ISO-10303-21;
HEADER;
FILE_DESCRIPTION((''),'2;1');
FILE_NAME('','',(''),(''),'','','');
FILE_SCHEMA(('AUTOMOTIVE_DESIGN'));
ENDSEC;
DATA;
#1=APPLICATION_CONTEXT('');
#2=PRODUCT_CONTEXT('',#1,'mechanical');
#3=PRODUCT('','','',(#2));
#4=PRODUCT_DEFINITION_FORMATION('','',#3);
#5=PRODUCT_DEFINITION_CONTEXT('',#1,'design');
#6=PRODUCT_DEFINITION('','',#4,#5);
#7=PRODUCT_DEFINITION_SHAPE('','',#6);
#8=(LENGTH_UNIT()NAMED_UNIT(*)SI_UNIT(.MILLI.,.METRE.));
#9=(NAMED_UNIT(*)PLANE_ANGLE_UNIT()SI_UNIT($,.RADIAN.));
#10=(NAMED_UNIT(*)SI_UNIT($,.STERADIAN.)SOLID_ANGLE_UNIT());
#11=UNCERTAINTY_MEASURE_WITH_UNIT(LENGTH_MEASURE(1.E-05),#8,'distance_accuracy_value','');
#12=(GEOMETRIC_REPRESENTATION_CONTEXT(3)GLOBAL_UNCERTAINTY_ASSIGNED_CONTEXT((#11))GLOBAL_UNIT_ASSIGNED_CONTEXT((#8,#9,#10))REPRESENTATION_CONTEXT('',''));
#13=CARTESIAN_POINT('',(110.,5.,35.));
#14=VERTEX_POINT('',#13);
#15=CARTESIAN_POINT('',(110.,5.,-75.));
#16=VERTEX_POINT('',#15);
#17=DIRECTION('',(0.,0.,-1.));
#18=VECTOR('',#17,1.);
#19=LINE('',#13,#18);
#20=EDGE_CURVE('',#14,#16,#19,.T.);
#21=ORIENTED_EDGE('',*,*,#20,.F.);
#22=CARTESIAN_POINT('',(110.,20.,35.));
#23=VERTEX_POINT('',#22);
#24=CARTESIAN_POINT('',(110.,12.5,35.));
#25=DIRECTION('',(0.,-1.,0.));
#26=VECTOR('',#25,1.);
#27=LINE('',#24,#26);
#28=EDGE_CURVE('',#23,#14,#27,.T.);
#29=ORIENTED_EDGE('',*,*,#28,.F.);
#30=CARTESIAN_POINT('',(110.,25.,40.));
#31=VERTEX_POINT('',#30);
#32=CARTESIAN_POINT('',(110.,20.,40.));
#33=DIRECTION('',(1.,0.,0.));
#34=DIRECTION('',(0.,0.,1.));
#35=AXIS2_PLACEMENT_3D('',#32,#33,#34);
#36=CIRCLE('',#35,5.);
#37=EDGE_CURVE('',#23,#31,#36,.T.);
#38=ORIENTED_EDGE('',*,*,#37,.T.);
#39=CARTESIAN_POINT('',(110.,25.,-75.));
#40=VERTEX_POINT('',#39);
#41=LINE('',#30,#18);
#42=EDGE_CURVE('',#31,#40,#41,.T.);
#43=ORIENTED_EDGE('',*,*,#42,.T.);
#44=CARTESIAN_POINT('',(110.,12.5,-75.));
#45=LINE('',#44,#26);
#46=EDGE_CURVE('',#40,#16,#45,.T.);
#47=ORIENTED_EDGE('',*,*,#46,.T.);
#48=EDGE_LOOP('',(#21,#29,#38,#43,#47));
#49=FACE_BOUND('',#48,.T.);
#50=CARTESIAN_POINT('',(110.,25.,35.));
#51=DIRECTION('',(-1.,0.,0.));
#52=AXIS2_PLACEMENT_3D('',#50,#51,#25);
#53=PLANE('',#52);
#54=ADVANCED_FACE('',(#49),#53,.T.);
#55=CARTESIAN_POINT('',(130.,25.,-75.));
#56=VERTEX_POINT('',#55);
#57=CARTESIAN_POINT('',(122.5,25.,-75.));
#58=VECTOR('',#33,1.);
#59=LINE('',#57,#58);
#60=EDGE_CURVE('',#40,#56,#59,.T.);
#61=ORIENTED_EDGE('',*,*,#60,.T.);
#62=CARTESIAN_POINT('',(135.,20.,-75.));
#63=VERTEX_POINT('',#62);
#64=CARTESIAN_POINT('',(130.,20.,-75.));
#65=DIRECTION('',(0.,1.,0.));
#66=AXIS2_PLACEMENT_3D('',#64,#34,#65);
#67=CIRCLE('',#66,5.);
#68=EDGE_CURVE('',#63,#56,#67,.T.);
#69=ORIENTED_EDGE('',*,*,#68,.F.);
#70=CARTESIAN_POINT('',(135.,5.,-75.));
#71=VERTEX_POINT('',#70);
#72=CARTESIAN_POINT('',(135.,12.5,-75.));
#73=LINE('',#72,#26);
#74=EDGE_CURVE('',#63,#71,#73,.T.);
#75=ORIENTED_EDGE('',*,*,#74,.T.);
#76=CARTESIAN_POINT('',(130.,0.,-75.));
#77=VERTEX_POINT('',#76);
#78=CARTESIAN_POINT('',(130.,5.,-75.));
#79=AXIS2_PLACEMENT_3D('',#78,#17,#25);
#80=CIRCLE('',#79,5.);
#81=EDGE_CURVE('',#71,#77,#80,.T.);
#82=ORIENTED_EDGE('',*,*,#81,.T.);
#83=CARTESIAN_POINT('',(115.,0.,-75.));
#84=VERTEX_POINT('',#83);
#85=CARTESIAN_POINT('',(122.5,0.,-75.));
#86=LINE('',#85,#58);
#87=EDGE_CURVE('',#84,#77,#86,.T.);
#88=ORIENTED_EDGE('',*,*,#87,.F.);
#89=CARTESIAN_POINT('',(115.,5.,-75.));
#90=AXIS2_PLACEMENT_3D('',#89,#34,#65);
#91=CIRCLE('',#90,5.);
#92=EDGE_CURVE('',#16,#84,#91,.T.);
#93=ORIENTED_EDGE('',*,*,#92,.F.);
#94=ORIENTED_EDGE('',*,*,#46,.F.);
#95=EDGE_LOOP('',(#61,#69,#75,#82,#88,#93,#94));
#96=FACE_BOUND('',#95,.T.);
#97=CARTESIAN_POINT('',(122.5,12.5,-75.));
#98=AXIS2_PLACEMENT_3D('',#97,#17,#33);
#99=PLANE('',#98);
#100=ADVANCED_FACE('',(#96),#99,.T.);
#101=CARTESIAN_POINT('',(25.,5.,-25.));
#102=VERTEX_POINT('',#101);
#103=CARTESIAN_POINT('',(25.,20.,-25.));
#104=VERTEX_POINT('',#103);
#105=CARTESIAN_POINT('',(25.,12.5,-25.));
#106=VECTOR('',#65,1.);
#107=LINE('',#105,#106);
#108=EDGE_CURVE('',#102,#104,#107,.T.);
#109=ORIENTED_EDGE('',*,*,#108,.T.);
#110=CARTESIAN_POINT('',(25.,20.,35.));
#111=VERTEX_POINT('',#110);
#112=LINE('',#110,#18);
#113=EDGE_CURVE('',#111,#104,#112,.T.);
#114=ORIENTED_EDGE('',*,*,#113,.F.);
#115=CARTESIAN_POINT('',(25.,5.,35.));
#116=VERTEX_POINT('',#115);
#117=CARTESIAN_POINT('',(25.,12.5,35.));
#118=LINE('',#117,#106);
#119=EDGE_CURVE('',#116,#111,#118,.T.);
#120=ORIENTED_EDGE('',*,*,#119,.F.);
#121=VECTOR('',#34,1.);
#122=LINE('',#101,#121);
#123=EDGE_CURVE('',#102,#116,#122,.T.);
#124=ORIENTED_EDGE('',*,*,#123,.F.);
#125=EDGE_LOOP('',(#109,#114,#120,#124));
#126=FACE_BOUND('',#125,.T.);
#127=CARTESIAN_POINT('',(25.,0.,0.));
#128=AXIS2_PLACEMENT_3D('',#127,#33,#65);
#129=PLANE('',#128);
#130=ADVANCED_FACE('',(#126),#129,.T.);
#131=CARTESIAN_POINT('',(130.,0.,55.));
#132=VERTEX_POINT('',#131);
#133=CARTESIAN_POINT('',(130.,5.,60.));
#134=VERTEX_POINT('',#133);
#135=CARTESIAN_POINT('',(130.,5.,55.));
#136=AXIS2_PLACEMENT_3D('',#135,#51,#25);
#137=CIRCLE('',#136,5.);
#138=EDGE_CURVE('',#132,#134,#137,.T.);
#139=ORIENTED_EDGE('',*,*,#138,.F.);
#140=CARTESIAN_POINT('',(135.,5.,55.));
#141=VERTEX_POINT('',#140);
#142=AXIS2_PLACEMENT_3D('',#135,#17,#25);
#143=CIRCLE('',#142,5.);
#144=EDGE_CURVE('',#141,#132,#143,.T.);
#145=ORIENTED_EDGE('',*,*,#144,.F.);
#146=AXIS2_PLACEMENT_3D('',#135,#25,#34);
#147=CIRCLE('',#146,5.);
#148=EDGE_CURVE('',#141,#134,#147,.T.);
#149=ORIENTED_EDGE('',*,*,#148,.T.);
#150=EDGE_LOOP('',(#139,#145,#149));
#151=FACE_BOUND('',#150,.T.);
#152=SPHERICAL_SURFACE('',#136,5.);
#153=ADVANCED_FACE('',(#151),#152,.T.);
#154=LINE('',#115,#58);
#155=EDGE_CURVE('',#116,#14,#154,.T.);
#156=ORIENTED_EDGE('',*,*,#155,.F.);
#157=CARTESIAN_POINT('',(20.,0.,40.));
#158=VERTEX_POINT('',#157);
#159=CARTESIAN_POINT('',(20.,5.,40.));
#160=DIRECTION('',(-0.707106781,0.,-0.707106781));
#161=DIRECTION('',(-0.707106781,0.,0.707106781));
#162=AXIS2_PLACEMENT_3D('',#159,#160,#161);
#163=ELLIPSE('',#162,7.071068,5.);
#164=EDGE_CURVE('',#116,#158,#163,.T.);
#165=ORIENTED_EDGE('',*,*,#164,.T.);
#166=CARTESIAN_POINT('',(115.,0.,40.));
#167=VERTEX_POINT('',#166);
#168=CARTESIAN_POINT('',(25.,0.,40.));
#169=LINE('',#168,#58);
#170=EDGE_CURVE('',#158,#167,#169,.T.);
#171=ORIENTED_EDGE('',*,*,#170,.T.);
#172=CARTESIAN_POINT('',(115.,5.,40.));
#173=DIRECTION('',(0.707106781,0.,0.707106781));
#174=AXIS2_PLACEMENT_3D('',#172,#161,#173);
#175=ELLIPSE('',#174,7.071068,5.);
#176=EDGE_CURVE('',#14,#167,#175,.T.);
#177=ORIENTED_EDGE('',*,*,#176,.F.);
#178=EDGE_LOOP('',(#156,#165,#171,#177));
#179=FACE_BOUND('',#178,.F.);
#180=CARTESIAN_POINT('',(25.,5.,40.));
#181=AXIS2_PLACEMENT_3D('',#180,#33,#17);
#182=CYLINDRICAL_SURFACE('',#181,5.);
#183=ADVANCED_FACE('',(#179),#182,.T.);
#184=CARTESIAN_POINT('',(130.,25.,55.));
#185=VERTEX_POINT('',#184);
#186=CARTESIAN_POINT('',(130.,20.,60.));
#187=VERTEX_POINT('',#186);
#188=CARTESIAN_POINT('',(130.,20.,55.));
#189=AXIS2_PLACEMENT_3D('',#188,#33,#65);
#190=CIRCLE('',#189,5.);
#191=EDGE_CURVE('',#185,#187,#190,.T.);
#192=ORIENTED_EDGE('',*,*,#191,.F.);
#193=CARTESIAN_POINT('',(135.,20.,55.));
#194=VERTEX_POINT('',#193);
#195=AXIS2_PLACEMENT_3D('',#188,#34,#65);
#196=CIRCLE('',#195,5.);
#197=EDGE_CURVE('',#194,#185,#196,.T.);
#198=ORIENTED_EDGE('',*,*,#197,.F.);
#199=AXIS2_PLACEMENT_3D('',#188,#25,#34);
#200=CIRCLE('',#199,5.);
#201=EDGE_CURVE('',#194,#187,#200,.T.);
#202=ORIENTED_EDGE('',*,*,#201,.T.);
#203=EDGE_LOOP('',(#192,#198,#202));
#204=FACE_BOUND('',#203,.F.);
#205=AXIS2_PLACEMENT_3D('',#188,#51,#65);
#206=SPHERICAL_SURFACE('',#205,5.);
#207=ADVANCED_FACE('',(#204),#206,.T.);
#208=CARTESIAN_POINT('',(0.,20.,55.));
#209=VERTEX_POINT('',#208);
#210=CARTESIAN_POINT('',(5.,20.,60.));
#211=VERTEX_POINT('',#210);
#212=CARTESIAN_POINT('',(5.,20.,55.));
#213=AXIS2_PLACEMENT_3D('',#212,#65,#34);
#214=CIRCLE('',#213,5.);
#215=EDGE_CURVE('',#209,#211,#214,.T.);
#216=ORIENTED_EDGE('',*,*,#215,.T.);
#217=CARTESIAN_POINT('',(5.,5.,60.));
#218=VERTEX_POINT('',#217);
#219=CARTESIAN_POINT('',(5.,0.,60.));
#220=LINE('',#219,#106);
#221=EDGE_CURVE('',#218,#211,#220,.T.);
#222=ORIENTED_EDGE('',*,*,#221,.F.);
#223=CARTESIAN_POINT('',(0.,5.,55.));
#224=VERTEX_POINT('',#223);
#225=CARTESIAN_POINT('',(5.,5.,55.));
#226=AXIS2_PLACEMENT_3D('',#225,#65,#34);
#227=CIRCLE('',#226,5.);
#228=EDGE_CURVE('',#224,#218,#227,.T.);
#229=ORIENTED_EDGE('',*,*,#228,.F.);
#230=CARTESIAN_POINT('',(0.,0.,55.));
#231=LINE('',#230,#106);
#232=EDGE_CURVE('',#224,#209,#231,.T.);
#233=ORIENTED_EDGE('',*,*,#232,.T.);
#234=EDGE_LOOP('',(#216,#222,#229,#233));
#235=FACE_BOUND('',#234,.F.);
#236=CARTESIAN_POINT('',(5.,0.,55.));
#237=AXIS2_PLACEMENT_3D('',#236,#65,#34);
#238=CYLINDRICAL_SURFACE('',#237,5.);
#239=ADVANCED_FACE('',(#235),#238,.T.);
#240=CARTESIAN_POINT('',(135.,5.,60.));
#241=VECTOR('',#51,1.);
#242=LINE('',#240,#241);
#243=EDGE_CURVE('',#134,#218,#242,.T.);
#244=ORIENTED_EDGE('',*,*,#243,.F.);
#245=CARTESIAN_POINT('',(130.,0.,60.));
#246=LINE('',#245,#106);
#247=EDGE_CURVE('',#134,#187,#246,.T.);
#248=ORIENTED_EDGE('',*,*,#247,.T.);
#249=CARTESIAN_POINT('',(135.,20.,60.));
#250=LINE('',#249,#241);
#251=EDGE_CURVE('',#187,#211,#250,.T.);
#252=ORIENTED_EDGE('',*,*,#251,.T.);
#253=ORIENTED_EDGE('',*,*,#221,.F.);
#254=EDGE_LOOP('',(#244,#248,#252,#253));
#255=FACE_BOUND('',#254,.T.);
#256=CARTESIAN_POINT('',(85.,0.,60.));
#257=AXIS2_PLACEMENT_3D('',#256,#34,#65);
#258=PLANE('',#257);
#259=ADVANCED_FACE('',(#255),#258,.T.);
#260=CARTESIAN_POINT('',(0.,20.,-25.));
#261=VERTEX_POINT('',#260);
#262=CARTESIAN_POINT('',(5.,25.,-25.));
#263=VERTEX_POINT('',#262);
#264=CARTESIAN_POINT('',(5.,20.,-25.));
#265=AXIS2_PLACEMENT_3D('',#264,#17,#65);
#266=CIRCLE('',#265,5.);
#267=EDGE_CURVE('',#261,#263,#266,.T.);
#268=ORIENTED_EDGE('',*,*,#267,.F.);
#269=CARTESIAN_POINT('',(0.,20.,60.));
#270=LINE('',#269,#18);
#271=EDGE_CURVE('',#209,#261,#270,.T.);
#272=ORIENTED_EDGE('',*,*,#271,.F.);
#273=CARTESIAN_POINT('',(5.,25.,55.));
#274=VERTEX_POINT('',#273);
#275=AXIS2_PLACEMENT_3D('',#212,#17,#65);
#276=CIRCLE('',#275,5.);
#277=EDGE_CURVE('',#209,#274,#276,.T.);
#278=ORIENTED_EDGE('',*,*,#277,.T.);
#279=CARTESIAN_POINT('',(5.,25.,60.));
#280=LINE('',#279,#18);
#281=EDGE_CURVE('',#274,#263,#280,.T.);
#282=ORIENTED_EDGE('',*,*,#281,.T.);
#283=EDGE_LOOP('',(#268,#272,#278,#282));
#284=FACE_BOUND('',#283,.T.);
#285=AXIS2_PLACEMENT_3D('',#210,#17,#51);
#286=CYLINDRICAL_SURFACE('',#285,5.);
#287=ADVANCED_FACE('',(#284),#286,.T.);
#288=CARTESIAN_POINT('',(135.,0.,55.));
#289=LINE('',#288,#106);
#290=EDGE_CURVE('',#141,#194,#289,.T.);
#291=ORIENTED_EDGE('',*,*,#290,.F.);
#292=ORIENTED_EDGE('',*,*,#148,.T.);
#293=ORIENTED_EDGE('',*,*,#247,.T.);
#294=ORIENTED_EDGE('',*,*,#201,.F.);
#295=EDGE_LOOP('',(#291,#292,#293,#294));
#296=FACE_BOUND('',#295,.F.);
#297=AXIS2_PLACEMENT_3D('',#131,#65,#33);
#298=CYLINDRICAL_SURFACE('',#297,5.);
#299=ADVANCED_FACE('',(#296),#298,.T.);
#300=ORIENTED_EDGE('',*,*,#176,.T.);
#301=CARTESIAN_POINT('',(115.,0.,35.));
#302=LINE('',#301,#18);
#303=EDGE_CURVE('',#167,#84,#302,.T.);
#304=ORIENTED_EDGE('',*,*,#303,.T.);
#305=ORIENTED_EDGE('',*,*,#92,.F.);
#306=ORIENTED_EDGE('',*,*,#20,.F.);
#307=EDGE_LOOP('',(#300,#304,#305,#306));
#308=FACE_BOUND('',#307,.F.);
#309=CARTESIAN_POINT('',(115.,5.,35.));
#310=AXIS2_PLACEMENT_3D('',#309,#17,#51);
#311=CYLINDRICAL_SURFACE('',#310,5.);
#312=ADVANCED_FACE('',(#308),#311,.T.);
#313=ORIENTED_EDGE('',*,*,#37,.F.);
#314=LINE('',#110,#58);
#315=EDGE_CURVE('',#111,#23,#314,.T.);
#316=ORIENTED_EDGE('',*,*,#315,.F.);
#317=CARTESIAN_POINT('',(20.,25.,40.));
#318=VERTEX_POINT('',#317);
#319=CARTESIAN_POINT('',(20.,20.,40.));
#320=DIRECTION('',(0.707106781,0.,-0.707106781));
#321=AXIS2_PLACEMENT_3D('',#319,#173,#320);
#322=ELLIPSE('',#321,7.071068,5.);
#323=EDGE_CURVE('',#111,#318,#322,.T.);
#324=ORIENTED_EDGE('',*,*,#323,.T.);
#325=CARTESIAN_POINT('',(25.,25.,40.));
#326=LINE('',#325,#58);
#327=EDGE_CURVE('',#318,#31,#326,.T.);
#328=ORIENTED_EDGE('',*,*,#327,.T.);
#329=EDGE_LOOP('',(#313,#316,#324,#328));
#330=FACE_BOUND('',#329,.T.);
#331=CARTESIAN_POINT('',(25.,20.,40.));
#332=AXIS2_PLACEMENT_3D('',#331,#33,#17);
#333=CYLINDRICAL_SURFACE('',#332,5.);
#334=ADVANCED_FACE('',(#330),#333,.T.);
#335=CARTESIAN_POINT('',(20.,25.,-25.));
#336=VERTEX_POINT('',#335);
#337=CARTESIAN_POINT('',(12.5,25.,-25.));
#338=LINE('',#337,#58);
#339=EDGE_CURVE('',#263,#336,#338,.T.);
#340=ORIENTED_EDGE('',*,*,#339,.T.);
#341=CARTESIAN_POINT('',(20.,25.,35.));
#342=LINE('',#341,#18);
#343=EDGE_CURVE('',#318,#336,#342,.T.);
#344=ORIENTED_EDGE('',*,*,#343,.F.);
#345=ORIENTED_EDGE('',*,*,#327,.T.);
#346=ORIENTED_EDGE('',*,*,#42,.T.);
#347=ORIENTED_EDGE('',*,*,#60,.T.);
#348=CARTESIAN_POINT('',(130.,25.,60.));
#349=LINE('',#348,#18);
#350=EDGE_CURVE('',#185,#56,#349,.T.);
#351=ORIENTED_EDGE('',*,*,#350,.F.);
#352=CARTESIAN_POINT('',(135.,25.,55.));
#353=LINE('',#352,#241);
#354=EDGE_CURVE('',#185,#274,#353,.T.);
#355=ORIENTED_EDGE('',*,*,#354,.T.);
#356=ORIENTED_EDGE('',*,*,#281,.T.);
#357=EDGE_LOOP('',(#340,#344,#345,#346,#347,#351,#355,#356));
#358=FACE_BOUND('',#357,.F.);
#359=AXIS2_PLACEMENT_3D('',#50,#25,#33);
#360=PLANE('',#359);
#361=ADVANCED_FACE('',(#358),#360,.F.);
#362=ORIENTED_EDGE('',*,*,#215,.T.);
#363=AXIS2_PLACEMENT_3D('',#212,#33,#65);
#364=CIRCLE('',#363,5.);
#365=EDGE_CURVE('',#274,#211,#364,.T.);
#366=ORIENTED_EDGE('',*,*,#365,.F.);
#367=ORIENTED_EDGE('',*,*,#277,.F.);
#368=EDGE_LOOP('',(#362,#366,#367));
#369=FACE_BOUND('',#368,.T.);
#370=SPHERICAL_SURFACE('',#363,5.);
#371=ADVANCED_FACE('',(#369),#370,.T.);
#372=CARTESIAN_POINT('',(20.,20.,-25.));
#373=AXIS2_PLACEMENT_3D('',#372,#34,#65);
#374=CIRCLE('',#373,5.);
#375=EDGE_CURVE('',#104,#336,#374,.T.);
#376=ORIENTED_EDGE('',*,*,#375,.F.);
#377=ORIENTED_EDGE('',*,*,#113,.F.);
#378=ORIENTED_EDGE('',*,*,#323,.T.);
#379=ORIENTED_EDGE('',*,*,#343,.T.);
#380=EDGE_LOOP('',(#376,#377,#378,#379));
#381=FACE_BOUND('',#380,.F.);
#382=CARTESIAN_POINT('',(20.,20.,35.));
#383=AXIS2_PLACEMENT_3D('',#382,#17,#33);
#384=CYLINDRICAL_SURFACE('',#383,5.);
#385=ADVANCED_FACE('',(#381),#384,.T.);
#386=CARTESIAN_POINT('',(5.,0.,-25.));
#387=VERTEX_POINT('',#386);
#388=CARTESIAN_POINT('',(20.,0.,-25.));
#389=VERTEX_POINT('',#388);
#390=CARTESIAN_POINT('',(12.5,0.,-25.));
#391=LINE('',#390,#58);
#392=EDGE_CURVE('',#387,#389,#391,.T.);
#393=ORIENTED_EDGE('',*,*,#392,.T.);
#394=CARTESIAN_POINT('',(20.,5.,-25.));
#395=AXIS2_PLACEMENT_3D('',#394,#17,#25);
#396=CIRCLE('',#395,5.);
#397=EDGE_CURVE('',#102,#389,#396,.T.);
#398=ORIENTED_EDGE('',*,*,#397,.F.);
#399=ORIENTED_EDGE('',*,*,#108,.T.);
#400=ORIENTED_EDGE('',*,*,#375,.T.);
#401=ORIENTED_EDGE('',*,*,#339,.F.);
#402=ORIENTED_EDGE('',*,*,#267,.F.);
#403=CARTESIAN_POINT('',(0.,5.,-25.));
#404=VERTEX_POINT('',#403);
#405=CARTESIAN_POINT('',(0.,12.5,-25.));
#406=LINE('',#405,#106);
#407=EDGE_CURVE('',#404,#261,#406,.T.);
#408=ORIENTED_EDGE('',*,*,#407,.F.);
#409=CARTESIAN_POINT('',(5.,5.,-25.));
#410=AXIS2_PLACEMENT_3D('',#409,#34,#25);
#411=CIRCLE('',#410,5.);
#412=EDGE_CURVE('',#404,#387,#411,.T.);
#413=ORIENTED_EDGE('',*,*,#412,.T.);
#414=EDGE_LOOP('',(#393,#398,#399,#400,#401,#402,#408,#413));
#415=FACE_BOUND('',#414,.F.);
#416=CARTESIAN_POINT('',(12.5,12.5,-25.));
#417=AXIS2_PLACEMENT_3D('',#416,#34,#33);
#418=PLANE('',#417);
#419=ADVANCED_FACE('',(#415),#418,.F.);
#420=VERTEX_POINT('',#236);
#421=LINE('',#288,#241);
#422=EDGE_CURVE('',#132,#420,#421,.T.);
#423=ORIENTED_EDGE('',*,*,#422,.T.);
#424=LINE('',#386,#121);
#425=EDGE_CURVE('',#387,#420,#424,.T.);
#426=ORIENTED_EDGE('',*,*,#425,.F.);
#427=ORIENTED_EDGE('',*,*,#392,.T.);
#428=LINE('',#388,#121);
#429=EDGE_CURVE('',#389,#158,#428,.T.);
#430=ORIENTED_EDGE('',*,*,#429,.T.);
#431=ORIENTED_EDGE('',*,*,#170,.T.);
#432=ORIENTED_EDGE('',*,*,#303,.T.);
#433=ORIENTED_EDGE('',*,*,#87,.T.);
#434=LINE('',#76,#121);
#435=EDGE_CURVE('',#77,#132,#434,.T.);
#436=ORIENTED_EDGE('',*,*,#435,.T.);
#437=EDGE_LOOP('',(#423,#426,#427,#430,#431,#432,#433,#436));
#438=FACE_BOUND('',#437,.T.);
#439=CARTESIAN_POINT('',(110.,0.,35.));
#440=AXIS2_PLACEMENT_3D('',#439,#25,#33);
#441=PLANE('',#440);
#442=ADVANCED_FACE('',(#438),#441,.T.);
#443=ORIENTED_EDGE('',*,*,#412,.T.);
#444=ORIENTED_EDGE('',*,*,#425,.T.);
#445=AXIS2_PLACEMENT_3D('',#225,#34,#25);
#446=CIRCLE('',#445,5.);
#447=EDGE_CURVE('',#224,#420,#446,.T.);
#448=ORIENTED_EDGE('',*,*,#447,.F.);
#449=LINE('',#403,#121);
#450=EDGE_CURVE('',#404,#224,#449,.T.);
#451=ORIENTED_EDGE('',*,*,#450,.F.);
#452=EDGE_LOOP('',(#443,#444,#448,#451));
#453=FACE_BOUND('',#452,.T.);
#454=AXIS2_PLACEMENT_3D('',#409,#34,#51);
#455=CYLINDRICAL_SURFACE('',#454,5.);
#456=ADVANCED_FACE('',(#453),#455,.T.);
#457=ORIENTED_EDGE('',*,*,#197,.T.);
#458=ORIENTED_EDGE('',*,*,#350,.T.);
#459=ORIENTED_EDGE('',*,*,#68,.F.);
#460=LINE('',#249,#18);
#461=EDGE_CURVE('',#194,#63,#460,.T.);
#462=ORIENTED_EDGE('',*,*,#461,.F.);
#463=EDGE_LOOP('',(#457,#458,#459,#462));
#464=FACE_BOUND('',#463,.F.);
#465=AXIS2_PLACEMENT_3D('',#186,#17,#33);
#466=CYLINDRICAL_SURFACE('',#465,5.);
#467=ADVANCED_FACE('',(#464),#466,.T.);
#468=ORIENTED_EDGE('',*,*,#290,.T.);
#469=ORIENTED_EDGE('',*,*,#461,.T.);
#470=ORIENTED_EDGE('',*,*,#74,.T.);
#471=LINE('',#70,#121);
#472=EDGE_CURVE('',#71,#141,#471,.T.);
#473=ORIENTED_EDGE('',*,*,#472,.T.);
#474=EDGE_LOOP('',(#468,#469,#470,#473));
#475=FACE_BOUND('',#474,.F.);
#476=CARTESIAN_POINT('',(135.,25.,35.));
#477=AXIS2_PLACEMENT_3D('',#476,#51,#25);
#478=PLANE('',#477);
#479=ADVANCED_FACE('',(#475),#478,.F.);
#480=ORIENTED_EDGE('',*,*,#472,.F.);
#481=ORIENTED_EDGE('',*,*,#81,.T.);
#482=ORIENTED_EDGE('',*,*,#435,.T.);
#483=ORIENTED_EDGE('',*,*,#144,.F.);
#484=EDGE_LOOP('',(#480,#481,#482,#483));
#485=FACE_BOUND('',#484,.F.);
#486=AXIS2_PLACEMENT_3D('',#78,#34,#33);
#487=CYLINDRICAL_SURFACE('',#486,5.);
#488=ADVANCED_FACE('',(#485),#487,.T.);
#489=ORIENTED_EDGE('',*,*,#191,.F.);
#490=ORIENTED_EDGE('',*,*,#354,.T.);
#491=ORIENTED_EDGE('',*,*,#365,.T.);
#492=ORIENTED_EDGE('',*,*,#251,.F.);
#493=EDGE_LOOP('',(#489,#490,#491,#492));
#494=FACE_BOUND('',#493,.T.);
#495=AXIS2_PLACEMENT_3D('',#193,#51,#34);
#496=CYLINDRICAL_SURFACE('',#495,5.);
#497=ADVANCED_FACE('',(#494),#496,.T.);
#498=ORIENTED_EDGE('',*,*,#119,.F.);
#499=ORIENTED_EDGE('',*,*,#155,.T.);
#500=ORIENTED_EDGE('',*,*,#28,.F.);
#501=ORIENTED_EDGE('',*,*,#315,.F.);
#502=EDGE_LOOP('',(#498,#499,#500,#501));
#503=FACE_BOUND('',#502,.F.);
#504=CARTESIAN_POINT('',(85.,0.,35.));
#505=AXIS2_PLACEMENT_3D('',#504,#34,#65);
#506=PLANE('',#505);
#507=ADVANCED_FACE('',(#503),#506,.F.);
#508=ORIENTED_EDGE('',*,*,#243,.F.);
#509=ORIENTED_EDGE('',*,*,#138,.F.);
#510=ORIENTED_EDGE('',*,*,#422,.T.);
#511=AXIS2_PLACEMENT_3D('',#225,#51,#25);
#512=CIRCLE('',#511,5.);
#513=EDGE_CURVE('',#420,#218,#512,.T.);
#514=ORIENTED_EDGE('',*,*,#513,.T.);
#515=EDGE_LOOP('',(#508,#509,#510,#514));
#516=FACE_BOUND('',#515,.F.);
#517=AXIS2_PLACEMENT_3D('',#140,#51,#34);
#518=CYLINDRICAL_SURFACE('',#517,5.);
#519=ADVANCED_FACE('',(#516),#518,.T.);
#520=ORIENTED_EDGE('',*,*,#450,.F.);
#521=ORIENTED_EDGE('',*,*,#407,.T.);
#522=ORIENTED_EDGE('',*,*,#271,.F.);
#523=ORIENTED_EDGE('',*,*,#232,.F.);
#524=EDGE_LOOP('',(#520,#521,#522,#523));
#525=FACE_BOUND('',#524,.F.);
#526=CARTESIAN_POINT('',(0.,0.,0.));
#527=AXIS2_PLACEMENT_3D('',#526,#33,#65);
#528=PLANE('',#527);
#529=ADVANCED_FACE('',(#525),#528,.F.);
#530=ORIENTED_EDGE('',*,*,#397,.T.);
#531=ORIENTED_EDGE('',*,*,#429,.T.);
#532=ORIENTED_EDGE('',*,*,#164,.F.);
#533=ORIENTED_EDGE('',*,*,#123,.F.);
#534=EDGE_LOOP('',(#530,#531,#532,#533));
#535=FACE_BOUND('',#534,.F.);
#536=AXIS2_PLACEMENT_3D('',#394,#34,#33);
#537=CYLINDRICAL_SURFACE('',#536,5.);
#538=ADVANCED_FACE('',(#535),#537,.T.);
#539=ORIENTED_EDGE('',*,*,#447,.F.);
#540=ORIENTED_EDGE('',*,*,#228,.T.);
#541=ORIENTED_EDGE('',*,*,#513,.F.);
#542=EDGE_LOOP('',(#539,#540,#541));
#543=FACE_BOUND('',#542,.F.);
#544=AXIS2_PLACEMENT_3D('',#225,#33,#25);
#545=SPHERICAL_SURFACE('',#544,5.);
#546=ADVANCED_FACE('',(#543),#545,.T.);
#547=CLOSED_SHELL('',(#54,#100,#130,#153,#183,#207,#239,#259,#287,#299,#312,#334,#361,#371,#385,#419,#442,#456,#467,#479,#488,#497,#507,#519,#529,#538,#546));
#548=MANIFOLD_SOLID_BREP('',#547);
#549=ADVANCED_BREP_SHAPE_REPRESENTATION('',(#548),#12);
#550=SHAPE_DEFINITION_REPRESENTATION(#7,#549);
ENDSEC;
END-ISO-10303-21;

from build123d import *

# Parameters (mm, degrees)
F0_W     = 25
F0_H     = 25
F1_DEPTH = 60
F2_W     = 25
F2_H     = 25
F3_DEPTH = 60
F4_DEPTH = 25
F5_DEPTH = 50
F6_W     = 25
F6_H     = 25
F7_DEPTH = 110
F8_R     = 5


with BuildPart() as f1:
    # F0 (on Top) → F1 (new body)
    with BuildSketch(Plane.XY):
        with Locations((12.5, 12.5)):
            Rectangle(F0_W, F0_H)
    extrude(amount=F1_DEPTH)

    # F2 (on face) → F3 (join)
    with BuildSketch(Plane.YZ.offset(25)):
        with Locations((12.5, 47.5)):
            Rectangle(F2_W, F2_H)
    extrude(amount=F3_DEPTH)

    # F4 (add): a face of the model
    f4_faces = [f1.faces().sort_by_distance(p)[0] for p in [
        (12.5, 12.5, 0),
    ]]
    extrude(f4_faces, amount=F4_DEPTH)

    # F5 (add): a face of the model
    f5_faces = [f1.faces().sort_by_distance(p)[0] for p in [
        (85, 12.5, 47.5),
    ]]
    extrude(f5_faces, amount=F5_DEPTH)

    # F6 (on face) → F7 (join)
    with BuildSketch(Plane(origin=(0, 0, 35), x_dir=(1, 0, 0), z_dir=(0, 0, -1))):
        with Locations((122.5, -12.5)):
            Rectangle(F6_W, F6_H)
    extrude(amount=F7_DEPTH)

    # F8
    f8_edges = [f1.edges().sort_by_distance(p)[0] for p in [
        (67.5, 0, 60),
        (67.5, 25, 60),
        (25, 0, 5),
        (25, 25, 5),
        (0, 0, 17.5),
        (0, 25, 17.5),
        (67.5, 0, 35),
        (135, 0, -7.5),
        (135, 25, -7.5),
        (135, 12.5, 60),
        (0, 12.5, 60),
        (67.5, 25, 35),
        (110, 0, -20),
    ]]
    fillet(f8_edges, radius=F8_R)


solid = f1.part
